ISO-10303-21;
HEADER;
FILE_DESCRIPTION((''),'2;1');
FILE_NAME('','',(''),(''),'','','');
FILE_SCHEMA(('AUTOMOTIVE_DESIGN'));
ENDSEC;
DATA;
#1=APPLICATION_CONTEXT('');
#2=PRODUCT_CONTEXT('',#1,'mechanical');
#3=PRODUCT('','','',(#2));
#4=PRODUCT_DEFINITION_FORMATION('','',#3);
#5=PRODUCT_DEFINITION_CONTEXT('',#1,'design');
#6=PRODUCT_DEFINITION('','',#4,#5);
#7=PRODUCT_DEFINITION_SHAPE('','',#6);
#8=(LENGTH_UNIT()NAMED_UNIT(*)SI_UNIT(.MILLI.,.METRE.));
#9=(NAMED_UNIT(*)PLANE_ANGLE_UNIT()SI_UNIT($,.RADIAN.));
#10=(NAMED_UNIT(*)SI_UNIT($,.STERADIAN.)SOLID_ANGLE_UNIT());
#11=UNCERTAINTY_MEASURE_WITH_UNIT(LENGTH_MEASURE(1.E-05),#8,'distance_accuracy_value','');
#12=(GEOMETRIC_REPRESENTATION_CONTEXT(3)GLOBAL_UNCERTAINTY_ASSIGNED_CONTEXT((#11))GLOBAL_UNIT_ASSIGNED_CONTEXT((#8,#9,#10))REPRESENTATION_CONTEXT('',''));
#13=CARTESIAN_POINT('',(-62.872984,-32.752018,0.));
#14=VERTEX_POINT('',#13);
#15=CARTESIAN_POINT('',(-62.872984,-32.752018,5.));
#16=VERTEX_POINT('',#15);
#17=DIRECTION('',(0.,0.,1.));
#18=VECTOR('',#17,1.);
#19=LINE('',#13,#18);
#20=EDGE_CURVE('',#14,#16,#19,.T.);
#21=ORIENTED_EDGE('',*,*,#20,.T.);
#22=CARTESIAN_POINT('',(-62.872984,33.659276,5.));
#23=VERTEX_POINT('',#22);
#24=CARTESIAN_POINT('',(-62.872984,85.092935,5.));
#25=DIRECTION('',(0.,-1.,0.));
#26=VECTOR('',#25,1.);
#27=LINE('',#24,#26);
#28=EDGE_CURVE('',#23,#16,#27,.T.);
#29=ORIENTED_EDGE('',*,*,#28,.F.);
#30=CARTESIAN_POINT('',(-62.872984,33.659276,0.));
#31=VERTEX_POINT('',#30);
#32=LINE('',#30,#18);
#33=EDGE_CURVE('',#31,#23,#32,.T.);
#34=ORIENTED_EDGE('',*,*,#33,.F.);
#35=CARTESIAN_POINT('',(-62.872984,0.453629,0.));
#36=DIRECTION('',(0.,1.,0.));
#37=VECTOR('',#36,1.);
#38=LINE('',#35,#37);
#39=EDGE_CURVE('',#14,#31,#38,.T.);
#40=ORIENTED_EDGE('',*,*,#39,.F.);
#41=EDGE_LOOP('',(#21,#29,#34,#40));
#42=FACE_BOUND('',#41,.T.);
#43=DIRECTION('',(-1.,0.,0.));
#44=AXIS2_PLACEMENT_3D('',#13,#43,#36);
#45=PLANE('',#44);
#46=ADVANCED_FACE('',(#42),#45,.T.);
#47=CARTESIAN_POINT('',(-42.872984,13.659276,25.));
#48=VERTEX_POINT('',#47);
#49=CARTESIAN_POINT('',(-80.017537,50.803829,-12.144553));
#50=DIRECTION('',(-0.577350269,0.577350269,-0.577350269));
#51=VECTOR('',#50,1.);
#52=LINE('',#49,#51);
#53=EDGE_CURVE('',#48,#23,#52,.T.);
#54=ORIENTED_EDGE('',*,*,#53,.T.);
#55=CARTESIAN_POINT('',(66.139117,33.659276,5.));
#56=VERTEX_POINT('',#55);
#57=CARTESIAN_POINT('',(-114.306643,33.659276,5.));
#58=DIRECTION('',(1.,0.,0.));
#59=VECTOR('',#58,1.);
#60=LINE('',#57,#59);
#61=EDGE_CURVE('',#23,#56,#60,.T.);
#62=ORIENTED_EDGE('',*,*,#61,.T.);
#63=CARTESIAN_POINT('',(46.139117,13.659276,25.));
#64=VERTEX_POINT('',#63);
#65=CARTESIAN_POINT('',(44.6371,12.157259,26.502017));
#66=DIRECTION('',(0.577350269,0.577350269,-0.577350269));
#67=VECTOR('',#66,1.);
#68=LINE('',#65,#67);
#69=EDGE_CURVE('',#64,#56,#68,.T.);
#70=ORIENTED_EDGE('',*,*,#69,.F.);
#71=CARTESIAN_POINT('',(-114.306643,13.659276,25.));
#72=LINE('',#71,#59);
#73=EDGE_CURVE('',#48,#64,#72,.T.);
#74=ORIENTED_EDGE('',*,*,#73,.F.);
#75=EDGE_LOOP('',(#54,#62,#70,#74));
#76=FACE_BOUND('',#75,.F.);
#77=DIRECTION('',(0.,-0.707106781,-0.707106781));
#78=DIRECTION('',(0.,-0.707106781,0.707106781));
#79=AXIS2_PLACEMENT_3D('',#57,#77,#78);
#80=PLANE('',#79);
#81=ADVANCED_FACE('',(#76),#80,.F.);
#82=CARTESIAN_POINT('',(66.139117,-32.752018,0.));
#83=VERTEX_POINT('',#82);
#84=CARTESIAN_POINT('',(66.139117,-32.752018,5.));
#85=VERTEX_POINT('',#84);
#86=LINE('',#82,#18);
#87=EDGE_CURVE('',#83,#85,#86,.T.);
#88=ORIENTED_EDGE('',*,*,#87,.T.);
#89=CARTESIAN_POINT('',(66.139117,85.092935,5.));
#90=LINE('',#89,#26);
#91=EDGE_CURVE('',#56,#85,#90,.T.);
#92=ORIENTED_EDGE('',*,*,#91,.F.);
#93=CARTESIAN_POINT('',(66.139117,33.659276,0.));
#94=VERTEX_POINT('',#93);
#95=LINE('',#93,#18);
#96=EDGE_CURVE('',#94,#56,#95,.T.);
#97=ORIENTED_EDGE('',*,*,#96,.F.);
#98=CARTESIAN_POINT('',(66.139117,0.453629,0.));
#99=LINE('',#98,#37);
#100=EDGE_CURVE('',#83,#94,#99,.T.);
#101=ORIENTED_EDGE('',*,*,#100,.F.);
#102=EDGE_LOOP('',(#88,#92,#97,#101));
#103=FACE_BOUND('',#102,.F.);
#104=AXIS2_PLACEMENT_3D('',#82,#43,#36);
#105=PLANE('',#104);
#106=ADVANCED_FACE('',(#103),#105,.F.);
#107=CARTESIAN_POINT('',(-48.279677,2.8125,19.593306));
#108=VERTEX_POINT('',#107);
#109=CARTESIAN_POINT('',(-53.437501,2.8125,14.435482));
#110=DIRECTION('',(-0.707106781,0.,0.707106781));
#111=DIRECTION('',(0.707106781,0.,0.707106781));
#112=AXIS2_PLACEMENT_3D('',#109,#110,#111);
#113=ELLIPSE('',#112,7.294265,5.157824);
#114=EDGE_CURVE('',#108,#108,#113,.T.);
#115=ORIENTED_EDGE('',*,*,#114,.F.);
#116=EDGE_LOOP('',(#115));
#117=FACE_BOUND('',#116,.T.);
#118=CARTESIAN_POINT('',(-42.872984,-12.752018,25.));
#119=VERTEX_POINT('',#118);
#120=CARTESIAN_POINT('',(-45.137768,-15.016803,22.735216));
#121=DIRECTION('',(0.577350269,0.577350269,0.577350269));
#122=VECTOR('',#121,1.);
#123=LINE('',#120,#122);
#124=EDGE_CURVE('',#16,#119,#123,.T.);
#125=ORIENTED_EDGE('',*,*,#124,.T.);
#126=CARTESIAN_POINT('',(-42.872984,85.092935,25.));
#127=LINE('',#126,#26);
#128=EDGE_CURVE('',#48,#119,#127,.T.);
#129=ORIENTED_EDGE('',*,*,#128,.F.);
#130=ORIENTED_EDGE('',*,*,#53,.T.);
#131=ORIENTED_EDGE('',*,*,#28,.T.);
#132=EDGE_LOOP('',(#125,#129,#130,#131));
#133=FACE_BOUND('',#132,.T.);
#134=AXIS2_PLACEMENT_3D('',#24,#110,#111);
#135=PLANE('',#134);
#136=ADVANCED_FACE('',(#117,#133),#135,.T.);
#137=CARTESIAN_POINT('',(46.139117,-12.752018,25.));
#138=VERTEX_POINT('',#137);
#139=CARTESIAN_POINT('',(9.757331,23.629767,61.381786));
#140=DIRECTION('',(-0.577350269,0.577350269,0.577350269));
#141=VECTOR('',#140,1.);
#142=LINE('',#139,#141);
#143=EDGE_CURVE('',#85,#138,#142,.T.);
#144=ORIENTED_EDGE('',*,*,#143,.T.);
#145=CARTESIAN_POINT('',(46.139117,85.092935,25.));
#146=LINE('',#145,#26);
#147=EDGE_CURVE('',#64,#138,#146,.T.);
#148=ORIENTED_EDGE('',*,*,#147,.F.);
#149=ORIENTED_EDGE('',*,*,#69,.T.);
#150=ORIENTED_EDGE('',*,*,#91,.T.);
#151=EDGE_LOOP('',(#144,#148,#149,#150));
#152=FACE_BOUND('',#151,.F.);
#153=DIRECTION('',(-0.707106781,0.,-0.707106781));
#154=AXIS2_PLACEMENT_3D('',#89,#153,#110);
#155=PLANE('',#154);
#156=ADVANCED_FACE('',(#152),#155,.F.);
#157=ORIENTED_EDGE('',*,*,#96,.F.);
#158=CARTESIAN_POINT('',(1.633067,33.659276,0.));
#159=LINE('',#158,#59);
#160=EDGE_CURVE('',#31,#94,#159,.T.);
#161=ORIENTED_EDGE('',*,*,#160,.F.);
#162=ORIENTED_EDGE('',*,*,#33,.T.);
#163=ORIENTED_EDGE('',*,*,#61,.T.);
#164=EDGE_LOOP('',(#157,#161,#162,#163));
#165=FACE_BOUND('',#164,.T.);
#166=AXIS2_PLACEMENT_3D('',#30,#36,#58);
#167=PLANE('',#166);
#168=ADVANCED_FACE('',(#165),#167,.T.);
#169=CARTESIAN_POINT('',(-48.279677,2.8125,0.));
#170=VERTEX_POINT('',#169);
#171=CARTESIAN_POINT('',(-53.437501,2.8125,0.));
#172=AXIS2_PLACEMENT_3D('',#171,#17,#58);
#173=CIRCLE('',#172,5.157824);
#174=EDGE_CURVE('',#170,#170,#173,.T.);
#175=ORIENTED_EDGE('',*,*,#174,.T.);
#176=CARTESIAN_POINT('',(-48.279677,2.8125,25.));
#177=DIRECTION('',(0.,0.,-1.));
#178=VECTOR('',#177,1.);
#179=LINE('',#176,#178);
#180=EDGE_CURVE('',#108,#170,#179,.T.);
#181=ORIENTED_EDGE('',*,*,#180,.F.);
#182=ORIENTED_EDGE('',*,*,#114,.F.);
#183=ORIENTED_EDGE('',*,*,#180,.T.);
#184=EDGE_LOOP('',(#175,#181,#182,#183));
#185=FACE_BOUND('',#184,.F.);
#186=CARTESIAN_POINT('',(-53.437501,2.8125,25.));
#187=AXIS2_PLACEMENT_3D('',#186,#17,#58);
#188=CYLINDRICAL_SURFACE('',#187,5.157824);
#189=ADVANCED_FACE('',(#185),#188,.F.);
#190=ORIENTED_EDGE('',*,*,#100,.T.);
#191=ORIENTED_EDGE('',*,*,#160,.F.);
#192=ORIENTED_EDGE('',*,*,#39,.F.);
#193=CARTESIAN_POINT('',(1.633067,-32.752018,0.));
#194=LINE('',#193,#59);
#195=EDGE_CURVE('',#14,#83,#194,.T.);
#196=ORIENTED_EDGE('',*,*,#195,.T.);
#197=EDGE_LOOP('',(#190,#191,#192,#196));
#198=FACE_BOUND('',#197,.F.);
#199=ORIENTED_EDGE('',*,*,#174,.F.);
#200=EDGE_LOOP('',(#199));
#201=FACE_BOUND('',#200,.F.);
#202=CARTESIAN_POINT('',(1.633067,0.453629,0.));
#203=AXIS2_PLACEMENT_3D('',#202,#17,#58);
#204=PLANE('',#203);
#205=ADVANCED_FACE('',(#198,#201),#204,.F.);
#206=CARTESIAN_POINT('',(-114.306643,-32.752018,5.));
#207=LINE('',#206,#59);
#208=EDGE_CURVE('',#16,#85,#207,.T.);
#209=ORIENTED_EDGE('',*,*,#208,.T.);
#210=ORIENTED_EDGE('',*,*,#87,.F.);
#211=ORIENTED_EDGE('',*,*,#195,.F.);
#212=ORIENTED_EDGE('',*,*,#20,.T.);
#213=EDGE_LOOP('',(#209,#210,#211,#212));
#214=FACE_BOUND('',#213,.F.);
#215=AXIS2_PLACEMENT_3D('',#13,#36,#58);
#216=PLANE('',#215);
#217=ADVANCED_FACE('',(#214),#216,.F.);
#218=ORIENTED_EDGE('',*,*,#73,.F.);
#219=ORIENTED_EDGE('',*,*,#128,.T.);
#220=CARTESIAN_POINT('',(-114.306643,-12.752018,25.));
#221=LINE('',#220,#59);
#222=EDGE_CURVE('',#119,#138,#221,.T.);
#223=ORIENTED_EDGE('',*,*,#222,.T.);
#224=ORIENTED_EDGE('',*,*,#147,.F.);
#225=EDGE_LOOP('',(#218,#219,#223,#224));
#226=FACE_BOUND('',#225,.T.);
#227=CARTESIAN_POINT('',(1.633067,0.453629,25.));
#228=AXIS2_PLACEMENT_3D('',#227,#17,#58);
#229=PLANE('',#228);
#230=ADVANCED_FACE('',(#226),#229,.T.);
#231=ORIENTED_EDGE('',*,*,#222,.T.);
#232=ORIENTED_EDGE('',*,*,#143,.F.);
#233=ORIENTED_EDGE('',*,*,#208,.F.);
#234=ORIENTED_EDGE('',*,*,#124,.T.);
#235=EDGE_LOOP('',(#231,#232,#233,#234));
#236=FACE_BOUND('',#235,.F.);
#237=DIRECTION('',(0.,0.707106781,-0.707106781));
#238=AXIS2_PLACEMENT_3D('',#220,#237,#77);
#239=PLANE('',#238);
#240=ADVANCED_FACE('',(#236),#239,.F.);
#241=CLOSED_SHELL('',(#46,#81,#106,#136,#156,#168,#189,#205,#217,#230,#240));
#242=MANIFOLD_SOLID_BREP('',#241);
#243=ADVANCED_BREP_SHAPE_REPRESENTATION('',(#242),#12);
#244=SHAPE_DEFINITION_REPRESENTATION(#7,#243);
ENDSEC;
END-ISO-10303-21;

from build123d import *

# Parameters (mm, degrees)
F0_W        = 129.0121003985
F0_H        = 66.4112940431
F1_DEPTH    = 25
F2_R        = 5.1578241127
F3_DEPTH    = 25
F4_T1_DEPTH = 231.8794199172
F4_T3_DEPTH = 169.2786135617


# Not quite as in the source:
# - a fillet or chamfer that OpenCascade refuses, or shapes differently, is made with other operations: its cross-section is extruded or revolved along the edge and cut away or added


with BuildPart() as f1:
    # F0 (on Top) → F1 (new body)
    with BuildSketch(Plane.XY):
        with Locations((1.633066684, 0.4536285996)):
            Rectangle(F0_W, F0_H)
    extrude(amount=F1_DEPTH)

    # F2 (on face) → F3 (cut)
    with BuildSketch(Plane.XY.offset(25)):
        with Locations((-53.4375011921, 2.8125003446)):
            Circle(F2_R)
    extrude(amount=-F3_DEPTH, mode=Mode.SUBTRACT)

    # F4: chamfer of 20 on 4 edges, made by hand

    # F4_s2 → F4_t1 (cut)
    with BuildSketch(Plane.YZ.offset(-114.3066432746)):
        Polygon((-12.7520184219, 25), (-32.7520184219, 5), (-32.7520184219, 25), align=None)
        Polygon((33.6592756212, 5), (13.6592756212, 25), (33.6592756212, 25), align=None)
    extrude(amount=F4_T1_DEPTH, mode=Mode.SUBTRACT)

    # F4_s4 → F4_t3 (cut)
    with BuildSketch(Plane.XZ.offset(-85.0929353805)):
        Polygon((-62.8729835153, 5), (-42.8729835153, 25), (-62.8729835153, 25), align=None)
        Polygon((66.1391168833, 5), (46.1391168833, 25), (66.1391168833, 25), align=None)
    extrude(amount=F4_T3_DEPTH, mode=Mode.SUBTRACT)


solid = f1.part
